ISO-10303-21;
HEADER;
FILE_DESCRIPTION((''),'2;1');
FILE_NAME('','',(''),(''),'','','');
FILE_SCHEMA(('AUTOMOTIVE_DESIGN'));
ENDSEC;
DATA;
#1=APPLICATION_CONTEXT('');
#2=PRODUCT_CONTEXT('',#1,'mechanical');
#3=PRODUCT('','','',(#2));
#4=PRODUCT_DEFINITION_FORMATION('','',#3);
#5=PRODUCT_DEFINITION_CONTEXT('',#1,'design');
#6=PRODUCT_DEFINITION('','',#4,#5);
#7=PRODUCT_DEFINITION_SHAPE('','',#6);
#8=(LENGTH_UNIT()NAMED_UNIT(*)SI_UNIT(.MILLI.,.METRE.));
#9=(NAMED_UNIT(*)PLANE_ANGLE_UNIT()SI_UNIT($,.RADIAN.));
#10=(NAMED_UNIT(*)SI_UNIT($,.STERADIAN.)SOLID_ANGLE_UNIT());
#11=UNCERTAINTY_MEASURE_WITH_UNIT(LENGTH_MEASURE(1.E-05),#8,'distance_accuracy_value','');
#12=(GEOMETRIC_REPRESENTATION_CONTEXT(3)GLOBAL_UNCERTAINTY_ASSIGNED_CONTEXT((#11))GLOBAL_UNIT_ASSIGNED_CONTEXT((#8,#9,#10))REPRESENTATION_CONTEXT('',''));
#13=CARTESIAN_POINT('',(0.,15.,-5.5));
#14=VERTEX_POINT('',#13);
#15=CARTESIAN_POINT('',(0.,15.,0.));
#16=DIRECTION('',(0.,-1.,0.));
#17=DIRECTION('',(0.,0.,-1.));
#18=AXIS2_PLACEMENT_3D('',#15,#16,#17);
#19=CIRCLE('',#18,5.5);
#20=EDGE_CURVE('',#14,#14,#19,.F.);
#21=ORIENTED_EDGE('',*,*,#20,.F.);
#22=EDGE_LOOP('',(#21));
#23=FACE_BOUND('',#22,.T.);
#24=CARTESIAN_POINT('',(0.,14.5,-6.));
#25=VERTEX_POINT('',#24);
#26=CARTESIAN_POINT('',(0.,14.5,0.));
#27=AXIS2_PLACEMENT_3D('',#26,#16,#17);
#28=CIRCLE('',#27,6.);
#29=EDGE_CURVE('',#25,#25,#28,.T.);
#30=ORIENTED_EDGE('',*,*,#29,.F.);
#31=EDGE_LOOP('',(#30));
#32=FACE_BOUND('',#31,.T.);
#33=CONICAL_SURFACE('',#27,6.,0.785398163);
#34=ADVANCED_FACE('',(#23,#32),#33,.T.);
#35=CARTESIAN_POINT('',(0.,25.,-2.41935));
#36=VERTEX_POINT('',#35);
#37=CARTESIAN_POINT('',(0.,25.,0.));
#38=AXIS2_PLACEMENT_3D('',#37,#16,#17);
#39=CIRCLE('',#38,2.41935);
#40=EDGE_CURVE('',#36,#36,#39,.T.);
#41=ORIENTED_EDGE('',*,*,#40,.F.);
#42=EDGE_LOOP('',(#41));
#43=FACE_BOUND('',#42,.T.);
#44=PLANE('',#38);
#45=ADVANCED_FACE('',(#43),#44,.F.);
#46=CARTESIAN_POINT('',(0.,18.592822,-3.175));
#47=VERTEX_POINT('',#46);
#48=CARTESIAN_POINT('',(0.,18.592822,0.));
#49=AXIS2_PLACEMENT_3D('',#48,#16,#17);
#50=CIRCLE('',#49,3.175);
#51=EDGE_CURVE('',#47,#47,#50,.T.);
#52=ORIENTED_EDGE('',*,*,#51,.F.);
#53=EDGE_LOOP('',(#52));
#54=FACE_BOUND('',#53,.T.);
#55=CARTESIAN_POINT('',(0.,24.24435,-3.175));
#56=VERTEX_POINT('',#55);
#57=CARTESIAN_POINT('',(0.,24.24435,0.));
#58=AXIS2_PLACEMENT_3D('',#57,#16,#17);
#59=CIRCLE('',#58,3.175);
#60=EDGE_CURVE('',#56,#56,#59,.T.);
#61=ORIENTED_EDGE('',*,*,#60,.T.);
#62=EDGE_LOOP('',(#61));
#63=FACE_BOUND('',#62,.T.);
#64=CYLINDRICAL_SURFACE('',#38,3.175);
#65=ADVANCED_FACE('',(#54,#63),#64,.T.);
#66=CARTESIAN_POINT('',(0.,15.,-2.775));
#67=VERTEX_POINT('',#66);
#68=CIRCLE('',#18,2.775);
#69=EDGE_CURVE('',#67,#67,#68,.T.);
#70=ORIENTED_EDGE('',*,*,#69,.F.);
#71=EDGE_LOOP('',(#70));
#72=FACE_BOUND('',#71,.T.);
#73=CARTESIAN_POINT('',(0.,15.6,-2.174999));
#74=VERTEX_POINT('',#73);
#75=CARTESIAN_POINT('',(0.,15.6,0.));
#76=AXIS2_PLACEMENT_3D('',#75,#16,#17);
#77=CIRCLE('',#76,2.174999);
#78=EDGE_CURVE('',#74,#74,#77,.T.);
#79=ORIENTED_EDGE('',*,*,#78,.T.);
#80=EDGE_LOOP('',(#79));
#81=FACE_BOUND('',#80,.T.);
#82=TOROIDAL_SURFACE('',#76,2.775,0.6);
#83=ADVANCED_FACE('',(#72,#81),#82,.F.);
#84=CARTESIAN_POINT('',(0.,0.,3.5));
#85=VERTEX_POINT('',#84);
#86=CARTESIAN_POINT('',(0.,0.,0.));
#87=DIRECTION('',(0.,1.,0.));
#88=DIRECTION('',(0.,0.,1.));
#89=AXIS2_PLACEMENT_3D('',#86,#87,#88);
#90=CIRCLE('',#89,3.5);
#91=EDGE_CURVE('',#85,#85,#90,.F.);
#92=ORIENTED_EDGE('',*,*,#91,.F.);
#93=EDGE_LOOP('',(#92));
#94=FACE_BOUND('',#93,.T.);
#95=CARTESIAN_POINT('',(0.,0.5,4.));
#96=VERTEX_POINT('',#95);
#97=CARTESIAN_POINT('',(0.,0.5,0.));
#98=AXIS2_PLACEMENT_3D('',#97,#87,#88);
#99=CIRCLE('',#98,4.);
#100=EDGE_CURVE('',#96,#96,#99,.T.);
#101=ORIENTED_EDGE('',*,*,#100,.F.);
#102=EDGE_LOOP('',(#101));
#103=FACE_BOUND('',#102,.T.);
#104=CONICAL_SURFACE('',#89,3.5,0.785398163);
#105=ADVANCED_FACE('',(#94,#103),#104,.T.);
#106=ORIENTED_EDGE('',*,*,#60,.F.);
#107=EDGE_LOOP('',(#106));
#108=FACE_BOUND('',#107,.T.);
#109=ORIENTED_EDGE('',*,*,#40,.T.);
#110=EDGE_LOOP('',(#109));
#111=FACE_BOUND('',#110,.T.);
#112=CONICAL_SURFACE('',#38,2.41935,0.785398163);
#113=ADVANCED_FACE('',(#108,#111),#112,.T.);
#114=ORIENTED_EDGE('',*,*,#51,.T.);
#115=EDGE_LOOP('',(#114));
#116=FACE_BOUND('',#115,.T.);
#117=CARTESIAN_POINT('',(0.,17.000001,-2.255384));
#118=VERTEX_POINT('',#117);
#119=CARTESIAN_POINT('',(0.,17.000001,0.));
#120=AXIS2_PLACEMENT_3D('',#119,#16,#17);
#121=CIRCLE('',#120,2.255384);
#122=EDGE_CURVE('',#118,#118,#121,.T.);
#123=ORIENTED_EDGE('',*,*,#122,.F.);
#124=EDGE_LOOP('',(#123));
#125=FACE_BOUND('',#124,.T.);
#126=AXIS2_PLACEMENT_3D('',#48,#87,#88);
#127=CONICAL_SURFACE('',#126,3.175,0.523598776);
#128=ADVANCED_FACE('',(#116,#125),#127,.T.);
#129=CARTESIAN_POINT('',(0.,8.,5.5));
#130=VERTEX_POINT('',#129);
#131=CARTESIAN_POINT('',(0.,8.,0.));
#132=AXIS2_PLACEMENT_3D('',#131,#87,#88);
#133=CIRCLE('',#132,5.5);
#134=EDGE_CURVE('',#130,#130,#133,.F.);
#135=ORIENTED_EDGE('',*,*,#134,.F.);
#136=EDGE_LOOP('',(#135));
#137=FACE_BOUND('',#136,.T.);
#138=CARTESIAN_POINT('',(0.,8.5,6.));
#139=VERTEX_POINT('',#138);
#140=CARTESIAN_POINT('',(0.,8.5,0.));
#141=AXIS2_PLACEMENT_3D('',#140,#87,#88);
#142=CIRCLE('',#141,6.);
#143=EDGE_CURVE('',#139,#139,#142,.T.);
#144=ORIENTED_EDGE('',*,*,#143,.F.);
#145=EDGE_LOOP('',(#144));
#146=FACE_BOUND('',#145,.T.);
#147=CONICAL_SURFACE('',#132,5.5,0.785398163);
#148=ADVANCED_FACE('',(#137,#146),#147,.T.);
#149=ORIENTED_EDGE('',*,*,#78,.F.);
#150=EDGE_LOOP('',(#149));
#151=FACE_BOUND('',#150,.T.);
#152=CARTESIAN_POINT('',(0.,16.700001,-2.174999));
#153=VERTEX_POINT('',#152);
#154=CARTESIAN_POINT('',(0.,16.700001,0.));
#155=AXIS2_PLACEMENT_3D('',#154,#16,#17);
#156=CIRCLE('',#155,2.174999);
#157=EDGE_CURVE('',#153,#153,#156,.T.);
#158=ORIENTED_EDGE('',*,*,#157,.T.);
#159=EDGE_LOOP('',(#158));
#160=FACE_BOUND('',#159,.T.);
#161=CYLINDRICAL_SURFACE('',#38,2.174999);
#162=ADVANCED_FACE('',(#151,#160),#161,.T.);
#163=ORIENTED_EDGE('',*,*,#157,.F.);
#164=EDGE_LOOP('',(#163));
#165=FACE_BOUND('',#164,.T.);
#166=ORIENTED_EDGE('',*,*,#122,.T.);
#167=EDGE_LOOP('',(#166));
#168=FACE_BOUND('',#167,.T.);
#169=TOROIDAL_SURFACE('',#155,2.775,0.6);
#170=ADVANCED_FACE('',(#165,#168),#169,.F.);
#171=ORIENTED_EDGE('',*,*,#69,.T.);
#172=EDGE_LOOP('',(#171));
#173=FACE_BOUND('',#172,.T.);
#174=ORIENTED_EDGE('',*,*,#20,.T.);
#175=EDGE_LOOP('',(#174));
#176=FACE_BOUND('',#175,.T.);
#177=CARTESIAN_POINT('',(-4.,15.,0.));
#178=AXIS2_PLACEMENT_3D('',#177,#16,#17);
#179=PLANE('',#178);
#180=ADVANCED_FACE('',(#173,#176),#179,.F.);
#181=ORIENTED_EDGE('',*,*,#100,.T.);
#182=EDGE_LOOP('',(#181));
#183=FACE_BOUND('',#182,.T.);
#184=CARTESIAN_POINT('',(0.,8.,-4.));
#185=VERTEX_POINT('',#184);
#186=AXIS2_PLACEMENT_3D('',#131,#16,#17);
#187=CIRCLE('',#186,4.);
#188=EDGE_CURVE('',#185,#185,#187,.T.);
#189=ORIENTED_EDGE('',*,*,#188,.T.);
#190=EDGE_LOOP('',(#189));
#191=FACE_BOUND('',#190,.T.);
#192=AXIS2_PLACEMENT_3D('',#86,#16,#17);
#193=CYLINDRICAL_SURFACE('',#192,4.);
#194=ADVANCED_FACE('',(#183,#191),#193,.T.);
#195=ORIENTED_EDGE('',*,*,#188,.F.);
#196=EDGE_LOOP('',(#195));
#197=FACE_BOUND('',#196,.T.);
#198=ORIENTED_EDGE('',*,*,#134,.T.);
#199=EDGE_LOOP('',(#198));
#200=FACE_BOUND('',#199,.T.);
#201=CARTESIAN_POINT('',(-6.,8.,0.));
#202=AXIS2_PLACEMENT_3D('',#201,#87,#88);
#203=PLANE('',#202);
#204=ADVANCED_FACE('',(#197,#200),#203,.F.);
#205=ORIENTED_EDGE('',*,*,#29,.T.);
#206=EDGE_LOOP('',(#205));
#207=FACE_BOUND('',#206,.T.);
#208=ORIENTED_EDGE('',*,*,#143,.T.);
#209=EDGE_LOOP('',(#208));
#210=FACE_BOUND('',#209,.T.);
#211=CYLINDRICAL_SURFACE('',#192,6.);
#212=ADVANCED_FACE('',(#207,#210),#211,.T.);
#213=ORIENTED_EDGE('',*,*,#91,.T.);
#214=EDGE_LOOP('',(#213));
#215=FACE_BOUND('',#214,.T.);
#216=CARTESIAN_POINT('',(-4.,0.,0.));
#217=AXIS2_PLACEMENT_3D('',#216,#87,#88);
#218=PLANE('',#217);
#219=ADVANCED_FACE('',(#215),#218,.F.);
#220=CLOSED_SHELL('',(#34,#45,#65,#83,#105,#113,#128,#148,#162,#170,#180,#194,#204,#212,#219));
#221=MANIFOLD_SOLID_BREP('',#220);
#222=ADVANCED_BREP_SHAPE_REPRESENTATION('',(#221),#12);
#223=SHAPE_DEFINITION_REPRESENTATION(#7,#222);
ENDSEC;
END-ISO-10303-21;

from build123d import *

# Parameters (mm, degrees)
CHAMFER1_SIZE = 0.5


# Read off the part's stored shape, not the designer's step: 1/4-20 Machine Threads Stud1
with BuildPart() as part:
    # Sketch1 → Revolve1 (revolve)
    with BuildSketch(Plane.XY, mode=Mode.PRIVATE) as revolve1_sk:
        Polygon((0, 0), (0, 25), (-4, 25), (-4, 15), (-6, 15), (-6, 8), (-4, 8), (-4, 0), align=None)
    revolve(revolve1_sk.sketch.rotate(Axis((0, 0, 0), (0, 1, 0)), 270), axis=Axis((0, 0, 0), (0, 1, 0)))

    # 1/4-20 Machine Threads Stud1 outline → 1/4-20 Machine Threads Stud1 (revolve, cut)
    with BuildSketch(Plane.XY):
        with BuildLine():
            Line((2.774999784, 15), (4, 15))
            Line((4, 15), (4, 25))
            Line((4, 25), (2.41935, 25))
            Line((2.41935, 25), (3.175, 24.24435))
            Line((3.175, 24.24435), (3.175, 18.592822263))
            Line((3.175, 18.592822263), (2.255384261, 17.00000108))
            ThreePointArc((2.255384261, 17.00000108), (2.195443975, 16.855292429), (2.17499946, 16.700000918))
            Line((2.17499946, 16.700000918), (2.17499946, 15.600000324))
            ThreePointArc((2.17499946, 15.600000324), (2.350735486, 15.175736026), (2.774999784, 15))
        make_face()
    revolve(axis=Axis((0, 0, 0), (0, 1, 0)), mode=Mode.SUBTRACT)

    # Chamfer1
    chamfer1_edges = [part.edges().sort_by_distance(p)[0] for p in [
        (0, 0, 4),
        (0, 8, 6),
        (0, 15, 6),
    ]]
    chamfer(chamfer1_edges, length=CHAMFER1_SIZE)


solid = part.part
